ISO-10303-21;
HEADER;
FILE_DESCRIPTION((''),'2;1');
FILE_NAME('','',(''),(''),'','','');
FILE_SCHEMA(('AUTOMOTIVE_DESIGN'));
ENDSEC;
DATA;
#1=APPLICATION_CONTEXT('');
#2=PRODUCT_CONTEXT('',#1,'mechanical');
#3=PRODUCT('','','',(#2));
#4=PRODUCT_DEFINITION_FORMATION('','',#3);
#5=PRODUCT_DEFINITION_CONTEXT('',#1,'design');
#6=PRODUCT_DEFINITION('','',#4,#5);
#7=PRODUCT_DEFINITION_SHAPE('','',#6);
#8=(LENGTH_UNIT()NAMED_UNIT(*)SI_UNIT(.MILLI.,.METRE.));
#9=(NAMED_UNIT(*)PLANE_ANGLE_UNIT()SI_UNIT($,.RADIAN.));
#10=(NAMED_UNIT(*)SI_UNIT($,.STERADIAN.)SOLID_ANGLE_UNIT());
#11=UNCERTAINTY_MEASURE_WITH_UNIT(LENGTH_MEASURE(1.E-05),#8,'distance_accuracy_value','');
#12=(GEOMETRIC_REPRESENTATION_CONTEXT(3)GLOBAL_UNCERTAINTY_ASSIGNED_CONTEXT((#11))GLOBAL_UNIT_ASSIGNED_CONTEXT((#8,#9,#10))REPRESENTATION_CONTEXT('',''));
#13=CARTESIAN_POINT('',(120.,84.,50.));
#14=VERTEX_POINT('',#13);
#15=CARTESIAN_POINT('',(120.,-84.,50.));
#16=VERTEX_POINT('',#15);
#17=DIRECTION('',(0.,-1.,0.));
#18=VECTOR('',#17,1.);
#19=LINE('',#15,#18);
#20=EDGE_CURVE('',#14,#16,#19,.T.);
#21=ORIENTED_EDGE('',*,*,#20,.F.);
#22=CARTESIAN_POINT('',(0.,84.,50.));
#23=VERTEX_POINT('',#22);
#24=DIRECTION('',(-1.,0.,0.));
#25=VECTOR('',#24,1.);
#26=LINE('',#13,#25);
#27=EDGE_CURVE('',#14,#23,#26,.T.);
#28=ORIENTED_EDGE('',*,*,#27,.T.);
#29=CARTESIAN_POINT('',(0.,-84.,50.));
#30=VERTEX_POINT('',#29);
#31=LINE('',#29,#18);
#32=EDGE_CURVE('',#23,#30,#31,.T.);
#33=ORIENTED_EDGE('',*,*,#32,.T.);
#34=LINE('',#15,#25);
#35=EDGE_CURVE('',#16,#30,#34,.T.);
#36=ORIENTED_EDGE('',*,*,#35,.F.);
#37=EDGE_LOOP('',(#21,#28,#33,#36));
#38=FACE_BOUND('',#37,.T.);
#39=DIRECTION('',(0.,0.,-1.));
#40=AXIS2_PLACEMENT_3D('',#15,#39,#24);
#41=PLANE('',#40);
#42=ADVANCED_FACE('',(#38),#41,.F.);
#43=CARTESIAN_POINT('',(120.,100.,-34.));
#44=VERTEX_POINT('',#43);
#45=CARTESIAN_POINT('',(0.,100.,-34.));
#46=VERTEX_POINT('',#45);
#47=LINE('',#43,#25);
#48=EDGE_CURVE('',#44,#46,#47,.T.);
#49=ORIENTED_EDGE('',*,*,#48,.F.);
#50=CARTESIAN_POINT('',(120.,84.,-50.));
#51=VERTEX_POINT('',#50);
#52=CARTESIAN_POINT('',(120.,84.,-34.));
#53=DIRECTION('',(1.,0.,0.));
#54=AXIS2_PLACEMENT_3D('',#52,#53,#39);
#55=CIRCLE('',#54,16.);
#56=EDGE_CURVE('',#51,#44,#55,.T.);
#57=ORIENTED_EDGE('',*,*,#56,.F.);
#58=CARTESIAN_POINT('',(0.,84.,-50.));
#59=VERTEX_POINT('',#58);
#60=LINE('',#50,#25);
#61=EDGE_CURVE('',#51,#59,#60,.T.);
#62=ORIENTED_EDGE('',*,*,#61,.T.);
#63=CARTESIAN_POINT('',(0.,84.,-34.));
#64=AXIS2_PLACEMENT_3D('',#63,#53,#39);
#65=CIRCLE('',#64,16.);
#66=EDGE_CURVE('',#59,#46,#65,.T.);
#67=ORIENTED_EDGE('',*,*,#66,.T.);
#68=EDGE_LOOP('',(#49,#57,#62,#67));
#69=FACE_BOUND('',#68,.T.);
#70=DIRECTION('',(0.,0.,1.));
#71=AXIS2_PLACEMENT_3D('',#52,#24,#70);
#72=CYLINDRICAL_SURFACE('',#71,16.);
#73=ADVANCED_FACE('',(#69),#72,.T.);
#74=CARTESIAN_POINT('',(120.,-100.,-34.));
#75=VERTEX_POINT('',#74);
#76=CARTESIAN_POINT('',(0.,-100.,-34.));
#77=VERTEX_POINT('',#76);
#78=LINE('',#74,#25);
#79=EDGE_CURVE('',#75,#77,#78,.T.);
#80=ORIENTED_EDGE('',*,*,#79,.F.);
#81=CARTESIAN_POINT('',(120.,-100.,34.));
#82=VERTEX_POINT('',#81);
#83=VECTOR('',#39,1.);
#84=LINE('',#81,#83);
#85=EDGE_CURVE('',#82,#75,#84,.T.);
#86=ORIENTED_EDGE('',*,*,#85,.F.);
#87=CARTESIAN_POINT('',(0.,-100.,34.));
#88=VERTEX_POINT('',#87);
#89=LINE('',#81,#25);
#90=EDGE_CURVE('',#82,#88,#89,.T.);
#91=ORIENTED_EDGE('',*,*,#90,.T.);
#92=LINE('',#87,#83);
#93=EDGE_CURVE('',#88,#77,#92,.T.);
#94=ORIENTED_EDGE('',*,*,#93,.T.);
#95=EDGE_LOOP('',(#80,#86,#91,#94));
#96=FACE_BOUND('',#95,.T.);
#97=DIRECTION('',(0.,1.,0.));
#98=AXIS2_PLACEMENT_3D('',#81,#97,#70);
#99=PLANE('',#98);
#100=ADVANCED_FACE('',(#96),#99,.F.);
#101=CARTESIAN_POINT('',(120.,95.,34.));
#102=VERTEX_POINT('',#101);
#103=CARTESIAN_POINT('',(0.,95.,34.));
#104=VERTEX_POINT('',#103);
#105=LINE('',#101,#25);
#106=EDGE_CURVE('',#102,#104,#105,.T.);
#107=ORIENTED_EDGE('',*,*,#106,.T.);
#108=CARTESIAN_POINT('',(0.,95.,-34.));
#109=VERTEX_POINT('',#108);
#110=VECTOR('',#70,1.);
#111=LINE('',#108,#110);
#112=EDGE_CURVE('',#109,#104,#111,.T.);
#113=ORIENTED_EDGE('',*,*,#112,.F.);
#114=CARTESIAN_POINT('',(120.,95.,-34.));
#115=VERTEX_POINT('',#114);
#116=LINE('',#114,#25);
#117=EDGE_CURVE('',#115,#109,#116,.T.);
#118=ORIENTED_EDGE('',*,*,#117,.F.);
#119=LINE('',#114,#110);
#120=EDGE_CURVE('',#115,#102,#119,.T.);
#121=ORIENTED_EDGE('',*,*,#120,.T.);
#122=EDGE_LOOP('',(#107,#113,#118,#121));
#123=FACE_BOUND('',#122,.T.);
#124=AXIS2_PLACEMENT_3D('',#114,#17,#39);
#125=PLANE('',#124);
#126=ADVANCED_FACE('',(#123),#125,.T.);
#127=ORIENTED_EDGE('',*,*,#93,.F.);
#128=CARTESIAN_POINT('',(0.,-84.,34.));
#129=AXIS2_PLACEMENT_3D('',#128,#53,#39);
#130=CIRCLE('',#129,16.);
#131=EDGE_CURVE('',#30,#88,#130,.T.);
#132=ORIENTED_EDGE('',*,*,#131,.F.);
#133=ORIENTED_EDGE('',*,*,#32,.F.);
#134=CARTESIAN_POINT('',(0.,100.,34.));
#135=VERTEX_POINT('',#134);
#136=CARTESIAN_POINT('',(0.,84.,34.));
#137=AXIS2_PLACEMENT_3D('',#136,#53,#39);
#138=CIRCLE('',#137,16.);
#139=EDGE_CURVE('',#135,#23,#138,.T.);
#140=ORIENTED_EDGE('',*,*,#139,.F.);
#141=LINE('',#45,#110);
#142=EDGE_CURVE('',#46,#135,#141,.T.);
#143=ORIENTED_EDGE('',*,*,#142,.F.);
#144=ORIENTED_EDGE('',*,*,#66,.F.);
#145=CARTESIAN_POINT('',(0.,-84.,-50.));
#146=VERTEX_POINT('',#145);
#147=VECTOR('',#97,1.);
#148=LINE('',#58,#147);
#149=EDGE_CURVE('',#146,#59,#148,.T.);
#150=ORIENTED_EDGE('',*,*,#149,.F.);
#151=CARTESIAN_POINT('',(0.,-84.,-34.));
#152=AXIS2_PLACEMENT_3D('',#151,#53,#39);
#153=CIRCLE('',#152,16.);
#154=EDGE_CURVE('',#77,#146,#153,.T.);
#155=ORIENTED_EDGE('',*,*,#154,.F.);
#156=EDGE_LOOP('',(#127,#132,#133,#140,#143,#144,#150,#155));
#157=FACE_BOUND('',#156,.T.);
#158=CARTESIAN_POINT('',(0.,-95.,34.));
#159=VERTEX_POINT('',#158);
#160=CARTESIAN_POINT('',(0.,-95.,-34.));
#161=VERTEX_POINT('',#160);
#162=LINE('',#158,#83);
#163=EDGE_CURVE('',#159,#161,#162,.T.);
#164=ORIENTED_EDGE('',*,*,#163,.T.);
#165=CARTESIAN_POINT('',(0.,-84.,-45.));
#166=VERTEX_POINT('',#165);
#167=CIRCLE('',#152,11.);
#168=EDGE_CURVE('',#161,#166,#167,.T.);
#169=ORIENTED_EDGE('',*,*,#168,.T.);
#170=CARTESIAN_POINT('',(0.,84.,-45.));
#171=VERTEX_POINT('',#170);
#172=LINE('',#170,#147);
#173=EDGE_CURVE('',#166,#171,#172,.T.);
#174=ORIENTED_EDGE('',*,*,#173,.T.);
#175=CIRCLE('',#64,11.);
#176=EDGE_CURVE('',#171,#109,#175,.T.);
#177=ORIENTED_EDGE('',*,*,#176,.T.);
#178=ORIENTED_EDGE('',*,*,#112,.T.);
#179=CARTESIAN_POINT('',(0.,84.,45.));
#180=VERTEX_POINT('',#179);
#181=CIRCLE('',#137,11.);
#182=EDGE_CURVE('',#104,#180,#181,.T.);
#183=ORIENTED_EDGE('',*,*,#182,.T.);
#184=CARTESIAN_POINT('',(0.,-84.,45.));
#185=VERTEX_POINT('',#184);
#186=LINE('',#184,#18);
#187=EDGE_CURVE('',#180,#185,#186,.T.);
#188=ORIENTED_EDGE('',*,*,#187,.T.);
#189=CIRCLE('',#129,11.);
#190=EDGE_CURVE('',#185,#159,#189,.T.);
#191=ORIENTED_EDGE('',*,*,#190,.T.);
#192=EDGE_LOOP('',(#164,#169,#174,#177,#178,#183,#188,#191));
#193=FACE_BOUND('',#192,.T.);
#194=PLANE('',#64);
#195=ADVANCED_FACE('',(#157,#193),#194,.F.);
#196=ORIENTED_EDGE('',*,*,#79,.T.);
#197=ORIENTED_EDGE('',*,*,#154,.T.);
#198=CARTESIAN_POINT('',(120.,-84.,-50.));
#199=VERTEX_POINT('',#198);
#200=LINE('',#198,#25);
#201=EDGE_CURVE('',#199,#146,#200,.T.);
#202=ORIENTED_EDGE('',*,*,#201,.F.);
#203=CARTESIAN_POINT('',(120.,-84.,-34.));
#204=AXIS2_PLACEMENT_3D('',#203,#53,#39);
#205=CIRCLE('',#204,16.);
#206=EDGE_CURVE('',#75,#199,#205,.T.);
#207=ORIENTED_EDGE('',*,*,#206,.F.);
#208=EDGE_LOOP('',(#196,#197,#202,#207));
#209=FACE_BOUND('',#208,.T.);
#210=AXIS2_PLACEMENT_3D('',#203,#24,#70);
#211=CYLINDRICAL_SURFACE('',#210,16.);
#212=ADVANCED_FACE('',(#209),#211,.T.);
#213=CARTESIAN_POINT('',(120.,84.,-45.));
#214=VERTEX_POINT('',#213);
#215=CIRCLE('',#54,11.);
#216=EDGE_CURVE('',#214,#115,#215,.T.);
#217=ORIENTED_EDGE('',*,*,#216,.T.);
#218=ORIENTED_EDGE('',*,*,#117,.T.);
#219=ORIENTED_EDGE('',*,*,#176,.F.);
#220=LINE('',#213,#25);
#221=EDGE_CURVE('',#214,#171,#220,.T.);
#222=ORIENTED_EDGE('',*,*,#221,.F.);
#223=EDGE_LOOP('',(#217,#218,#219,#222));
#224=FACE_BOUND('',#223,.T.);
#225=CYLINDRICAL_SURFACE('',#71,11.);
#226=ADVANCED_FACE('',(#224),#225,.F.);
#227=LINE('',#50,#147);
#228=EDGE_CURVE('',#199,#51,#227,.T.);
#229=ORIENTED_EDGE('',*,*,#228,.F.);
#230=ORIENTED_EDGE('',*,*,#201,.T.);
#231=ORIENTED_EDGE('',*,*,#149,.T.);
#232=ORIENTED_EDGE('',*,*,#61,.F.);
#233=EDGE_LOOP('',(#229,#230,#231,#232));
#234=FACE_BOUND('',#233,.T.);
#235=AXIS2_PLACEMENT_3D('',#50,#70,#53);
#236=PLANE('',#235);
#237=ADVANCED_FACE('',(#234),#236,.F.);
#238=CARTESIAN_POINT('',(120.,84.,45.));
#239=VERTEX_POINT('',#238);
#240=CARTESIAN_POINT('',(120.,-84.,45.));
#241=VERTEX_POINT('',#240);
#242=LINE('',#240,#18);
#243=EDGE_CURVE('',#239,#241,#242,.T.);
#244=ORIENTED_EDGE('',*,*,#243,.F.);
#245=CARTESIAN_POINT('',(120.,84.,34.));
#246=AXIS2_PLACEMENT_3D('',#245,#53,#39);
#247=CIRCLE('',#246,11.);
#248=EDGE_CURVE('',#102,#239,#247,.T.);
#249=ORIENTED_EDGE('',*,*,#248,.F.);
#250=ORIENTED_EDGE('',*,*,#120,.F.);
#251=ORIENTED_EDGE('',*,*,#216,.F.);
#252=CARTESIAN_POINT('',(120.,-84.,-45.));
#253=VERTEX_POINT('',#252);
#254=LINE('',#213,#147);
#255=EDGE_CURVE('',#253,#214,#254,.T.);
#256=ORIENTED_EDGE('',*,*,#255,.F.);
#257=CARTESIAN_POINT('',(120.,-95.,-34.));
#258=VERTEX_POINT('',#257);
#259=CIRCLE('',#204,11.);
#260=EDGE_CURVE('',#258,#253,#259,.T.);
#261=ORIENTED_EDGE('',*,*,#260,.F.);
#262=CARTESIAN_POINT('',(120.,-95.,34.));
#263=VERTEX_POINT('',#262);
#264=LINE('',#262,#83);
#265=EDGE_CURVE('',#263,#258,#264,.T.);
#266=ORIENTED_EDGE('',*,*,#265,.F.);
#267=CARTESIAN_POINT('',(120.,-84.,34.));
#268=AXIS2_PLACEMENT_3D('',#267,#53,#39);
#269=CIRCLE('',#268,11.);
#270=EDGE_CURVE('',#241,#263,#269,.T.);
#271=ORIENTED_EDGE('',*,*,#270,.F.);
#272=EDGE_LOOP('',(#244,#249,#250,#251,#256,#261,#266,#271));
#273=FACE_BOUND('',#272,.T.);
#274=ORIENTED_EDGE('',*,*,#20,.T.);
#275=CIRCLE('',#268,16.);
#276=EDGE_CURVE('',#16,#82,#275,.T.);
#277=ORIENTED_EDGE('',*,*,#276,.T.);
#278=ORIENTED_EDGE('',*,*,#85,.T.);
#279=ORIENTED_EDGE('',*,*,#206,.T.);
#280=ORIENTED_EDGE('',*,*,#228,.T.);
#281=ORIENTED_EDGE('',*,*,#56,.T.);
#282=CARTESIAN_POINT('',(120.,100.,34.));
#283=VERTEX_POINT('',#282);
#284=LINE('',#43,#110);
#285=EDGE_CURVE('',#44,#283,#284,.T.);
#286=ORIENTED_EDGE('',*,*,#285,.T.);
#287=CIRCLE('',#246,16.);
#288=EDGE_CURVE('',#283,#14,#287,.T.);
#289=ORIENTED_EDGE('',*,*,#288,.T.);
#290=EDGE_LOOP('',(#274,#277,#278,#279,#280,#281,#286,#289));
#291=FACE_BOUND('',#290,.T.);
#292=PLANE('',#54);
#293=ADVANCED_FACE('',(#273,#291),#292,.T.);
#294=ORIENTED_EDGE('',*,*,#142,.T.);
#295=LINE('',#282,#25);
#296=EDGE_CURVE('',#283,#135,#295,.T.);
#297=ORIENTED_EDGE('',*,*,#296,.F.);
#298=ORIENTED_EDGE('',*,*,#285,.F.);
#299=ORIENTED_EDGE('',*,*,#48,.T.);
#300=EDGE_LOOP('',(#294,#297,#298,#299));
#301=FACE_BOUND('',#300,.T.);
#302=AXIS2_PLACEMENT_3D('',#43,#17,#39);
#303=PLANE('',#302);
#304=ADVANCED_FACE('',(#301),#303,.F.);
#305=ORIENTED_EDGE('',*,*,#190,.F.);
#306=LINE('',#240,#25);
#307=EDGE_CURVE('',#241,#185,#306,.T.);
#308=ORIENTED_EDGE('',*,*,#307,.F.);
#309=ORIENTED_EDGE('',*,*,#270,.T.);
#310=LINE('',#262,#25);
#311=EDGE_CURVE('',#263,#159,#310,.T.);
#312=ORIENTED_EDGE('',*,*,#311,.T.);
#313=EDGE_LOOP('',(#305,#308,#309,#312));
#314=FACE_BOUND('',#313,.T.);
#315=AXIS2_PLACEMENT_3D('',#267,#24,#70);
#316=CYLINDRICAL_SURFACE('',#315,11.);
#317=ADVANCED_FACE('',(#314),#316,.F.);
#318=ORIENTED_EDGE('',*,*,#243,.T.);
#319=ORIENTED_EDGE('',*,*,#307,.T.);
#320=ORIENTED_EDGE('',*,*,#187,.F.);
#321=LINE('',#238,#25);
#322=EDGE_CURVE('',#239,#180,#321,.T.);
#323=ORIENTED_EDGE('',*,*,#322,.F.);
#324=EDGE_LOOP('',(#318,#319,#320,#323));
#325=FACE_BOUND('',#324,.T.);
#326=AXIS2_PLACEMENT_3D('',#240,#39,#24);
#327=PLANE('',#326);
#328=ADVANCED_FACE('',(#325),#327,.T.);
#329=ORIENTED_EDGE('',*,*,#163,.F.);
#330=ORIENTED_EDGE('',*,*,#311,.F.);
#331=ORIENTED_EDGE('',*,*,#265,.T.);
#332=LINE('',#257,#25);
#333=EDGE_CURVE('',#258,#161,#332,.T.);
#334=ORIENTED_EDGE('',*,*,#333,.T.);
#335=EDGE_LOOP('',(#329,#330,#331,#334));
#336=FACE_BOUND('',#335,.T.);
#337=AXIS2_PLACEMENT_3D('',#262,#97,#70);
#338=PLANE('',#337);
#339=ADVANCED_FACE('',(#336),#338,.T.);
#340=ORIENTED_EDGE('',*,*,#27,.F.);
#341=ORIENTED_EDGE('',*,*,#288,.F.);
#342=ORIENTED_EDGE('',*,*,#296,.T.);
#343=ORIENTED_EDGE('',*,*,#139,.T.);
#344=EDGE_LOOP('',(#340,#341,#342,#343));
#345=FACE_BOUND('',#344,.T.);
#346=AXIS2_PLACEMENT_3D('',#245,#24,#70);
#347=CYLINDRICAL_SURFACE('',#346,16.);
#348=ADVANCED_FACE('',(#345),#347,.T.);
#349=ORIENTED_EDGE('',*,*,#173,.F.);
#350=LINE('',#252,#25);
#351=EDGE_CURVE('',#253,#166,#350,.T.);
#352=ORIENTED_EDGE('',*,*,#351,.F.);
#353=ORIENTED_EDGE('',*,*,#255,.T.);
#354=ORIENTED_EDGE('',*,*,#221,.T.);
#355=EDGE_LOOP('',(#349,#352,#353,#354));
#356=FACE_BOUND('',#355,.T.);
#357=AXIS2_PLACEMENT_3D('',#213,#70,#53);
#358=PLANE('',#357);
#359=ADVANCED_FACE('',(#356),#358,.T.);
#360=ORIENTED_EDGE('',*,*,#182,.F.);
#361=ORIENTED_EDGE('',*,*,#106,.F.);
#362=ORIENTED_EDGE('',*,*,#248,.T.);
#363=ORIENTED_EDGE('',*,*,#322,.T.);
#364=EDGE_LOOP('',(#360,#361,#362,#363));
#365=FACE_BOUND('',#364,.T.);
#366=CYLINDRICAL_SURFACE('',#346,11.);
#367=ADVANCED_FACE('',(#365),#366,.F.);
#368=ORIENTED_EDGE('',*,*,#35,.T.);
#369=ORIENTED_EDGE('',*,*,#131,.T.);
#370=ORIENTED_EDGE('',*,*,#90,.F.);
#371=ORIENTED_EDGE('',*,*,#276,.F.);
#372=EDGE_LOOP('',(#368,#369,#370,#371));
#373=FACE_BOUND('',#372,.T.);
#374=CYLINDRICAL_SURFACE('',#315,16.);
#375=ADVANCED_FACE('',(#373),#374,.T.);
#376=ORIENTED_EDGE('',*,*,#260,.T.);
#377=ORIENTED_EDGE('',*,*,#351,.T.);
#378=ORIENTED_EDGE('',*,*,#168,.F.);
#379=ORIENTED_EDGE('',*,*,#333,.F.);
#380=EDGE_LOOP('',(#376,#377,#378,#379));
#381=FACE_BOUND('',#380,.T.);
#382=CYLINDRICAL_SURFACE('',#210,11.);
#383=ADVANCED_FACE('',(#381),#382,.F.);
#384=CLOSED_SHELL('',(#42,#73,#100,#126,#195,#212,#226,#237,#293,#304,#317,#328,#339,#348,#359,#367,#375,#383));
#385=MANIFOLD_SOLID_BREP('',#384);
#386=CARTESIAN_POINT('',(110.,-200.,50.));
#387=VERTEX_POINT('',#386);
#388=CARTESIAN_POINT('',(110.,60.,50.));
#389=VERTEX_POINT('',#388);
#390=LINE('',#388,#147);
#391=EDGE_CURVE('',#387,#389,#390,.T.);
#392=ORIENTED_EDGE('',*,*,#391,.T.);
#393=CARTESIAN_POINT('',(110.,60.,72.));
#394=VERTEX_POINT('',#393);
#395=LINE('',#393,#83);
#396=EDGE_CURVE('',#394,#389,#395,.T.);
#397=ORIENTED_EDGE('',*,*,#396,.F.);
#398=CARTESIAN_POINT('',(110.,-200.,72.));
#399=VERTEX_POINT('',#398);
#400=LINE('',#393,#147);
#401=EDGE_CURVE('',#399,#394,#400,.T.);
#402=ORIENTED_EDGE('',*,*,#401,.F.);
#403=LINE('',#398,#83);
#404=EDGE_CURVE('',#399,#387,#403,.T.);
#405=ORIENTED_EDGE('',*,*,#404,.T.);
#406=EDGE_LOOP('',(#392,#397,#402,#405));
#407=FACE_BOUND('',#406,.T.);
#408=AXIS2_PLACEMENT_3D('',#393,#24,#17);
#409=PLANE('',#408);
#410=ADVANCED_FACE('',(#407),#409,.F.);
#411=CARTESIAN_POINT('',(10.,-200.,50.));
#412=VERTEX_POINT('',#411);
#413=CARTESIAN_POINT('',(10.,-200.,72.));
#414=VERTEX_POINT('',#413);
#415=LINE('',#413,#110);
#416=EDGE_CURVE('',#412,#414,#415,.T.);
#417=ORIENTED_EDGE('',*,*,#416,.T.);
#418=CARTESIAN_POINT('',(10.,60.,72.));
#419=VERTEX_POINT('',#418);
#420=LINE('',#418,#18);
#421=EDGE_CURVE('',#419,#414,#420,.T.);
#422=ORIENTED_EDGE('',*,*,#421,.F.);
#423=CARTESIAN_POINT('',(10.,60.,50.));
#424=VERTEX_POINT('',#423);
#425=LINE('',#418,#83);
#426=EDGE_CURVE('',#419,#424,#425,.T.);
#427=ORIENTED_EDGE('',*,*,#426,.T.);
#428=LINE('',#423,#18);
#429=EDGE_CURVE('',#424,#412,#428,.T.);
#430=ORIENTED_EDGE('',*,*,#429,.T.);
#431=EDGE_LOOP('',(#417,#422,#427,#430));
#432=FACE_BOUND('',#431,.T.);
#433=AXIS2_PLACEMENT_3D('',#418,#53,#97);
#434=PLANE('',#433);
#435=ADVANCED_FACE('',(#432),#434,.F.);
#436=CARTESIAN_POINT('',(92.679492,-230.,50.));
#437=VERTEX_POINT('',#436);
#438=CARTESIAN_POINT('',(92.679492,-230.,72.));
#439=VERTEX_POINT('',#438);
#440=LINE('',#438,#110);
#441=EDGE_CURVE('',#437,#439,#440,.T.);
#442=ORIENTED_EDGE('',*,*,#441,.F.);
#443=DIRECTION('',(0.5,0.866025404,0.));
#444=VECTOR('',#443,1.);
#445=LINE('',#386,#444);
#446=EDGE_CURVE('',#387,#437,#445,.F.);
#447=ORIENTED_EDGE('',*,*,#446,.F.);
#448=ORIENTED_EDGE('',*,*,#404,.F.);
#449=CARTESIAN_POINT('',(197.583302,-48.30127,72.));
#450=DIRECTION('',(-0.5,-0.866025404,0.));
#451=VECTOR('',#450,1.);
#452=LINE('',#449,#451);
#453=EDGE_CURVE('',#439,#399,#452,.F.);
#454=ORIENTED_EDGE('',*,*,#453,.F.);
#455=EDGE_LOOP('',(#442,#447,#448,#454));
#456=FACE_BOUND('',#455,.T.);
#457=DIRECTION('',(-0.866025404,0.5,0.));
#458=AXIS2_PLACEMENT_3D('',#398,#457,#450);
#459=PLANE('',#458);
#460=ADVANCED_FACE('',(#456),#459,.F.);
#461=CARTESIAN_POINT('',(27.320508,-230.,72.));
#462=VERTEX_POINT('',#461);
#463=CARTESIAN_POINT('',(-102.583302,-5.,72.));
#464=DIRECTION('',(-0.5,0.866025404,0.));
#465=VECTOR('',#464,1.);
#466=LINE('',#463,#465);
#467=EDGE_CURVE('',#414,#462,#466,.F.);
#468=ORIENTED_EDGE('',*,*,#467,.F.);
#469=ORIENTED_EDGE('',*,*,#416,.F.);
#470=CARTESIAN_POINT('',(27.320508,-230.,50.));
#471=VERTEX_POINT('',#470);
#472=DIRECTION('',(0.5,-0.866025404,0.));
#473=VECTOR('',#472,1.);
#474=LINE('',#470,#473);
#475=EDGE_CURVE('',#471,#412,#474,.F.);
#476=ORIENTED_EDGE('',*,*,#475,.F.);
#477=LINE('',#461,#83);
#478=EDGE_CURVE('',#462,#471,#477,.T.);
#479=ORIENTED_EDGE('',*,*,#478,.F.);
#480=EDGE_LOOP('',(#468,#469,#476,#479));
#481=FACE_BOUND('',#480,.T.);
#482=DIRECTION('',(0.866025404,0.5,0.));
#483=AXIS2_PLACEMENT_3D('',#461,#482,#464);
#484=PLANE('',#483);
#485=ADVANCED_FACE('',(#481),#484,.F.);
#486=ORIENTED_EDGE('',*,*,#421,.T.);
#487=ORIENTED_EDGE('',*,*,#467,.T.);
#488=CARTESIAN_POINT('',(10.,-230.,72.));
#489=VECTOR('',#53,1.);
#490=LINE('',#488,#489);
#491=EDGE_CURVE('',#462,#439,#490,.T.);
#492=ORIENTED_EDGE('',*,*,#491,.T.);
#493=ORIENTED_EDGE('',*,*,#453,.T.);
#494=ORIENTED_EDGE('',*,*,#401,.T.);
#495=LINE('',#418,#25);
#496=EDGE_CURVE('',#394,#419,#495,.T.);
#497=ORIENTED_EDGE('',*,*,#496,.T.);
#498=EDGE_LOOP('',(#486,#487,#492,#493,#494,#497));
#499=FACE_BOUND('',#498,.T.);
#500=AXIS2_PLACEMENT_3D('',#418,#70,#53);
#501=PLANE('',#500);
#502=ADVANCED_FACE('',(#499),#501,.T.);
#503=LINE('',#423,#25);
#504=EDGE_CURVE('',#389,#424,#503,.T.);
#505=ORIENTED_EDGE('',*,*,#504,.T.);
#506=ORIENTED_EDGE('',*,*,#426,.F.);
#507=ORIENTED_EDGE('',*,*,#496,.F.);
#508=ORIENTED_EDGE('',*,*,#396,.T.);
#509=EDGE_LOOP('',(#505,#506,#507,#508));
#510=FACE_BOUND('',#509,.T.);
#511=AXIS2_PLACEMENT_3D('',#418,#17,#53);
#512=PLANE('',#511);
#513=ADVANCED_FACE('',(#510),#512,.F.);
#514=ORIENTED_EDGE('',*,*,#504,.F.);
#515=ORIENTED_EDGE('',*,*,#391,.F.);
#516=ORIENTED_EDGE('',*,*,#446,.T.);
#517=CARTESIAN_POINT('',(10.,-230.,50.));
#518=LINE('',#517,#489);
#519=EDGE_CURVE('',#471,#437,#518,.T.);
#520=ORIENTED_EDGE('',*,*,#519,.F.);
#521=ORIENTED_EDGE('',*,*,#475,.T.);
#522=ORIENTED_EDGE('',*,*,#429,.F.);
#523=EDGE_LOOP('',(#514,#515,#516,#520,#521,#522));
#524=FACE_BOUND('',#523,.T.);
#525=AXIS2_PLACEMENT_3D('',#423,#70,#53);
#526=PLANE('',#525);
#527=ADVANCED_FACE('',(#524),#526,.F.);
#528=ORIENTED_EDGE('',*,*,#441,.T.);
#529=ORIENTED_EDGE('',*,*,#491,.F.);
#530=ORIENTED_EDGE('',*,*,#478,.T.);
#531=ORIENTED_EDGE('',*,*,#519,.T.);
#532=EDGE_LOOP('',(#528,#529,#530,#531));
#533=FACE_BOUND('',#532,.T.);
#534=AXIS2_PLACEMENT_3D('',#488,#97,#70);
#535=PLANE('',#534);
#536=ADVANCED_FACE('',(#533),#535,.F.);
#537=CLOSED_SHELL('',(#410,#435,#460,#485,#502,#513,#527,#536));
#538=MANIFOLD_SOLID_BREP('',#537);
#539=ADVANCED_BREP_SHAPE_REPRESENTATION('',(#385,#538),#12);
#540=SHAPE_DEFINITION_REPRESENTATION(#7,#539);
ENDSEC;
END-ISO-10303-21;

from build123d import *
from OCP.BRepFilletAPI import BRepFilletAPI_MakeChamfer

# Parameters (mm, degrees)
MEMBRO_STRUTTURALE1_DEPTH = 120
SCHIZZO3_W                = 100
SCHIZZO3_H                = 290
ESTRUSIONE1_DEPTH         = 22
SMUSSO1_SIZE              = 30
SMUSSO1_SIZE2             = 17.320508076


# Read off the part's stored shape, not the designer's step: Membro strutturale1
with BuildPart() as part:
    # Membro strutturale1 outline → Membro strutturale1 (new body)
    with BuildSketch(Plane.YZ):
        with BuildLine():
            ThreePointArc((84, -50), (95.313708499, -45.313708499), (100, -34))
            Line((100, -34), (100, 34))
            ThreePointArc((100, 34), (95.313708499, 45.313708499), (84, 50))
            Line((84, 50), (-84, 50))
            ThreePointArc((-84, 50), (-95.313708499, 45.313708499), (-100, 34))
            Line((-100, 34), (-100, -34))
            ThreePointArc((-100, -34), (-95.313708499, -45.313708499), (-84, -50))
            Line((-84, -50), (84, -50))
        make_face()
        with BuildLine():
            Line((-84, 45), (84, 45))
            ThreePointArc((84, 45), (91.778174593, 41.778174593), (95, 34))
            Line((95, 34), (95, -34))
            ThreePointArc((95, -34), (91.778174593, -41.778174593), (84, -45))
            Line((84, -45), (-84, -45))
            ThreePointArc((-84, -45), (-91.778174593, -41.778174593), (-95, -34))
            Line((-95, -34), (-95, 34))
            ThreePointArc((-95, 34), (-91.778174593, 41.778174593), (-84, 45))
        make_face(mode=Mode.SUBTRACT)
    extrude(amount=MEMBRO_STRUTTURALE1_DEPTH)


with BuildPart() as body_2:
    # Schizzo3 → Estrusione1 (new body)
    with BuildSketch(Plane.XY.offset(50)):
        with Locations((60, -85)):
            Rectangle(SCHIZZO3_W, SCHIZZO3_H)
    extrude(amount=ESTRUSIONE1_DEPTH)

    # Smusso1: one chamfer whose edges measure the first distance from different faces: ONE call of the kernel's chamfer builder (chamfer() names one face for all edges)
    smusso1_edges_1 = [body_2.edges().sort_by_distance(p)[0] for p in [
        (110, -230, 61),
    ]]
    smusso1_side_1 = [body_2.faces().sort_by_distance(p)[0] for p in [
        (110, -85, 61),
    ]]
    smusso1_edges_2 = [body_2.edges().sort_by_distance(p)[0] for p in [
        (10, -230, 61),
    ]]
    smusso1_side_2 = [body_2.faces().sort_by_distance(p)[0] for p in [
        (10, -85, 61),
    ]]
    smusso1 = BRepFilletAPI_MakeChamfer(body_2.part.solid().wrapped)
    for e in smusso1_edges_1:
        smusso1.Add(SMUSSO1_SIZE, SMUSSO1_SIZE2, e.wrapped, smusso1_side_1[0].wrapped)  # the first distance lies on this face
    for e in smusso1_edges_2:
        smusso1.Add(SMUSSO1_SIZE, SMUSSO1_SIZE2, e.wrapped, smusso1_side_2[0].wrapped)  # the first distance lies on this face
    add(Compound.cast(smusso1.Shape()), mode=Mode.REPLACE)


solid = Compound([part.part, body_2.part])
